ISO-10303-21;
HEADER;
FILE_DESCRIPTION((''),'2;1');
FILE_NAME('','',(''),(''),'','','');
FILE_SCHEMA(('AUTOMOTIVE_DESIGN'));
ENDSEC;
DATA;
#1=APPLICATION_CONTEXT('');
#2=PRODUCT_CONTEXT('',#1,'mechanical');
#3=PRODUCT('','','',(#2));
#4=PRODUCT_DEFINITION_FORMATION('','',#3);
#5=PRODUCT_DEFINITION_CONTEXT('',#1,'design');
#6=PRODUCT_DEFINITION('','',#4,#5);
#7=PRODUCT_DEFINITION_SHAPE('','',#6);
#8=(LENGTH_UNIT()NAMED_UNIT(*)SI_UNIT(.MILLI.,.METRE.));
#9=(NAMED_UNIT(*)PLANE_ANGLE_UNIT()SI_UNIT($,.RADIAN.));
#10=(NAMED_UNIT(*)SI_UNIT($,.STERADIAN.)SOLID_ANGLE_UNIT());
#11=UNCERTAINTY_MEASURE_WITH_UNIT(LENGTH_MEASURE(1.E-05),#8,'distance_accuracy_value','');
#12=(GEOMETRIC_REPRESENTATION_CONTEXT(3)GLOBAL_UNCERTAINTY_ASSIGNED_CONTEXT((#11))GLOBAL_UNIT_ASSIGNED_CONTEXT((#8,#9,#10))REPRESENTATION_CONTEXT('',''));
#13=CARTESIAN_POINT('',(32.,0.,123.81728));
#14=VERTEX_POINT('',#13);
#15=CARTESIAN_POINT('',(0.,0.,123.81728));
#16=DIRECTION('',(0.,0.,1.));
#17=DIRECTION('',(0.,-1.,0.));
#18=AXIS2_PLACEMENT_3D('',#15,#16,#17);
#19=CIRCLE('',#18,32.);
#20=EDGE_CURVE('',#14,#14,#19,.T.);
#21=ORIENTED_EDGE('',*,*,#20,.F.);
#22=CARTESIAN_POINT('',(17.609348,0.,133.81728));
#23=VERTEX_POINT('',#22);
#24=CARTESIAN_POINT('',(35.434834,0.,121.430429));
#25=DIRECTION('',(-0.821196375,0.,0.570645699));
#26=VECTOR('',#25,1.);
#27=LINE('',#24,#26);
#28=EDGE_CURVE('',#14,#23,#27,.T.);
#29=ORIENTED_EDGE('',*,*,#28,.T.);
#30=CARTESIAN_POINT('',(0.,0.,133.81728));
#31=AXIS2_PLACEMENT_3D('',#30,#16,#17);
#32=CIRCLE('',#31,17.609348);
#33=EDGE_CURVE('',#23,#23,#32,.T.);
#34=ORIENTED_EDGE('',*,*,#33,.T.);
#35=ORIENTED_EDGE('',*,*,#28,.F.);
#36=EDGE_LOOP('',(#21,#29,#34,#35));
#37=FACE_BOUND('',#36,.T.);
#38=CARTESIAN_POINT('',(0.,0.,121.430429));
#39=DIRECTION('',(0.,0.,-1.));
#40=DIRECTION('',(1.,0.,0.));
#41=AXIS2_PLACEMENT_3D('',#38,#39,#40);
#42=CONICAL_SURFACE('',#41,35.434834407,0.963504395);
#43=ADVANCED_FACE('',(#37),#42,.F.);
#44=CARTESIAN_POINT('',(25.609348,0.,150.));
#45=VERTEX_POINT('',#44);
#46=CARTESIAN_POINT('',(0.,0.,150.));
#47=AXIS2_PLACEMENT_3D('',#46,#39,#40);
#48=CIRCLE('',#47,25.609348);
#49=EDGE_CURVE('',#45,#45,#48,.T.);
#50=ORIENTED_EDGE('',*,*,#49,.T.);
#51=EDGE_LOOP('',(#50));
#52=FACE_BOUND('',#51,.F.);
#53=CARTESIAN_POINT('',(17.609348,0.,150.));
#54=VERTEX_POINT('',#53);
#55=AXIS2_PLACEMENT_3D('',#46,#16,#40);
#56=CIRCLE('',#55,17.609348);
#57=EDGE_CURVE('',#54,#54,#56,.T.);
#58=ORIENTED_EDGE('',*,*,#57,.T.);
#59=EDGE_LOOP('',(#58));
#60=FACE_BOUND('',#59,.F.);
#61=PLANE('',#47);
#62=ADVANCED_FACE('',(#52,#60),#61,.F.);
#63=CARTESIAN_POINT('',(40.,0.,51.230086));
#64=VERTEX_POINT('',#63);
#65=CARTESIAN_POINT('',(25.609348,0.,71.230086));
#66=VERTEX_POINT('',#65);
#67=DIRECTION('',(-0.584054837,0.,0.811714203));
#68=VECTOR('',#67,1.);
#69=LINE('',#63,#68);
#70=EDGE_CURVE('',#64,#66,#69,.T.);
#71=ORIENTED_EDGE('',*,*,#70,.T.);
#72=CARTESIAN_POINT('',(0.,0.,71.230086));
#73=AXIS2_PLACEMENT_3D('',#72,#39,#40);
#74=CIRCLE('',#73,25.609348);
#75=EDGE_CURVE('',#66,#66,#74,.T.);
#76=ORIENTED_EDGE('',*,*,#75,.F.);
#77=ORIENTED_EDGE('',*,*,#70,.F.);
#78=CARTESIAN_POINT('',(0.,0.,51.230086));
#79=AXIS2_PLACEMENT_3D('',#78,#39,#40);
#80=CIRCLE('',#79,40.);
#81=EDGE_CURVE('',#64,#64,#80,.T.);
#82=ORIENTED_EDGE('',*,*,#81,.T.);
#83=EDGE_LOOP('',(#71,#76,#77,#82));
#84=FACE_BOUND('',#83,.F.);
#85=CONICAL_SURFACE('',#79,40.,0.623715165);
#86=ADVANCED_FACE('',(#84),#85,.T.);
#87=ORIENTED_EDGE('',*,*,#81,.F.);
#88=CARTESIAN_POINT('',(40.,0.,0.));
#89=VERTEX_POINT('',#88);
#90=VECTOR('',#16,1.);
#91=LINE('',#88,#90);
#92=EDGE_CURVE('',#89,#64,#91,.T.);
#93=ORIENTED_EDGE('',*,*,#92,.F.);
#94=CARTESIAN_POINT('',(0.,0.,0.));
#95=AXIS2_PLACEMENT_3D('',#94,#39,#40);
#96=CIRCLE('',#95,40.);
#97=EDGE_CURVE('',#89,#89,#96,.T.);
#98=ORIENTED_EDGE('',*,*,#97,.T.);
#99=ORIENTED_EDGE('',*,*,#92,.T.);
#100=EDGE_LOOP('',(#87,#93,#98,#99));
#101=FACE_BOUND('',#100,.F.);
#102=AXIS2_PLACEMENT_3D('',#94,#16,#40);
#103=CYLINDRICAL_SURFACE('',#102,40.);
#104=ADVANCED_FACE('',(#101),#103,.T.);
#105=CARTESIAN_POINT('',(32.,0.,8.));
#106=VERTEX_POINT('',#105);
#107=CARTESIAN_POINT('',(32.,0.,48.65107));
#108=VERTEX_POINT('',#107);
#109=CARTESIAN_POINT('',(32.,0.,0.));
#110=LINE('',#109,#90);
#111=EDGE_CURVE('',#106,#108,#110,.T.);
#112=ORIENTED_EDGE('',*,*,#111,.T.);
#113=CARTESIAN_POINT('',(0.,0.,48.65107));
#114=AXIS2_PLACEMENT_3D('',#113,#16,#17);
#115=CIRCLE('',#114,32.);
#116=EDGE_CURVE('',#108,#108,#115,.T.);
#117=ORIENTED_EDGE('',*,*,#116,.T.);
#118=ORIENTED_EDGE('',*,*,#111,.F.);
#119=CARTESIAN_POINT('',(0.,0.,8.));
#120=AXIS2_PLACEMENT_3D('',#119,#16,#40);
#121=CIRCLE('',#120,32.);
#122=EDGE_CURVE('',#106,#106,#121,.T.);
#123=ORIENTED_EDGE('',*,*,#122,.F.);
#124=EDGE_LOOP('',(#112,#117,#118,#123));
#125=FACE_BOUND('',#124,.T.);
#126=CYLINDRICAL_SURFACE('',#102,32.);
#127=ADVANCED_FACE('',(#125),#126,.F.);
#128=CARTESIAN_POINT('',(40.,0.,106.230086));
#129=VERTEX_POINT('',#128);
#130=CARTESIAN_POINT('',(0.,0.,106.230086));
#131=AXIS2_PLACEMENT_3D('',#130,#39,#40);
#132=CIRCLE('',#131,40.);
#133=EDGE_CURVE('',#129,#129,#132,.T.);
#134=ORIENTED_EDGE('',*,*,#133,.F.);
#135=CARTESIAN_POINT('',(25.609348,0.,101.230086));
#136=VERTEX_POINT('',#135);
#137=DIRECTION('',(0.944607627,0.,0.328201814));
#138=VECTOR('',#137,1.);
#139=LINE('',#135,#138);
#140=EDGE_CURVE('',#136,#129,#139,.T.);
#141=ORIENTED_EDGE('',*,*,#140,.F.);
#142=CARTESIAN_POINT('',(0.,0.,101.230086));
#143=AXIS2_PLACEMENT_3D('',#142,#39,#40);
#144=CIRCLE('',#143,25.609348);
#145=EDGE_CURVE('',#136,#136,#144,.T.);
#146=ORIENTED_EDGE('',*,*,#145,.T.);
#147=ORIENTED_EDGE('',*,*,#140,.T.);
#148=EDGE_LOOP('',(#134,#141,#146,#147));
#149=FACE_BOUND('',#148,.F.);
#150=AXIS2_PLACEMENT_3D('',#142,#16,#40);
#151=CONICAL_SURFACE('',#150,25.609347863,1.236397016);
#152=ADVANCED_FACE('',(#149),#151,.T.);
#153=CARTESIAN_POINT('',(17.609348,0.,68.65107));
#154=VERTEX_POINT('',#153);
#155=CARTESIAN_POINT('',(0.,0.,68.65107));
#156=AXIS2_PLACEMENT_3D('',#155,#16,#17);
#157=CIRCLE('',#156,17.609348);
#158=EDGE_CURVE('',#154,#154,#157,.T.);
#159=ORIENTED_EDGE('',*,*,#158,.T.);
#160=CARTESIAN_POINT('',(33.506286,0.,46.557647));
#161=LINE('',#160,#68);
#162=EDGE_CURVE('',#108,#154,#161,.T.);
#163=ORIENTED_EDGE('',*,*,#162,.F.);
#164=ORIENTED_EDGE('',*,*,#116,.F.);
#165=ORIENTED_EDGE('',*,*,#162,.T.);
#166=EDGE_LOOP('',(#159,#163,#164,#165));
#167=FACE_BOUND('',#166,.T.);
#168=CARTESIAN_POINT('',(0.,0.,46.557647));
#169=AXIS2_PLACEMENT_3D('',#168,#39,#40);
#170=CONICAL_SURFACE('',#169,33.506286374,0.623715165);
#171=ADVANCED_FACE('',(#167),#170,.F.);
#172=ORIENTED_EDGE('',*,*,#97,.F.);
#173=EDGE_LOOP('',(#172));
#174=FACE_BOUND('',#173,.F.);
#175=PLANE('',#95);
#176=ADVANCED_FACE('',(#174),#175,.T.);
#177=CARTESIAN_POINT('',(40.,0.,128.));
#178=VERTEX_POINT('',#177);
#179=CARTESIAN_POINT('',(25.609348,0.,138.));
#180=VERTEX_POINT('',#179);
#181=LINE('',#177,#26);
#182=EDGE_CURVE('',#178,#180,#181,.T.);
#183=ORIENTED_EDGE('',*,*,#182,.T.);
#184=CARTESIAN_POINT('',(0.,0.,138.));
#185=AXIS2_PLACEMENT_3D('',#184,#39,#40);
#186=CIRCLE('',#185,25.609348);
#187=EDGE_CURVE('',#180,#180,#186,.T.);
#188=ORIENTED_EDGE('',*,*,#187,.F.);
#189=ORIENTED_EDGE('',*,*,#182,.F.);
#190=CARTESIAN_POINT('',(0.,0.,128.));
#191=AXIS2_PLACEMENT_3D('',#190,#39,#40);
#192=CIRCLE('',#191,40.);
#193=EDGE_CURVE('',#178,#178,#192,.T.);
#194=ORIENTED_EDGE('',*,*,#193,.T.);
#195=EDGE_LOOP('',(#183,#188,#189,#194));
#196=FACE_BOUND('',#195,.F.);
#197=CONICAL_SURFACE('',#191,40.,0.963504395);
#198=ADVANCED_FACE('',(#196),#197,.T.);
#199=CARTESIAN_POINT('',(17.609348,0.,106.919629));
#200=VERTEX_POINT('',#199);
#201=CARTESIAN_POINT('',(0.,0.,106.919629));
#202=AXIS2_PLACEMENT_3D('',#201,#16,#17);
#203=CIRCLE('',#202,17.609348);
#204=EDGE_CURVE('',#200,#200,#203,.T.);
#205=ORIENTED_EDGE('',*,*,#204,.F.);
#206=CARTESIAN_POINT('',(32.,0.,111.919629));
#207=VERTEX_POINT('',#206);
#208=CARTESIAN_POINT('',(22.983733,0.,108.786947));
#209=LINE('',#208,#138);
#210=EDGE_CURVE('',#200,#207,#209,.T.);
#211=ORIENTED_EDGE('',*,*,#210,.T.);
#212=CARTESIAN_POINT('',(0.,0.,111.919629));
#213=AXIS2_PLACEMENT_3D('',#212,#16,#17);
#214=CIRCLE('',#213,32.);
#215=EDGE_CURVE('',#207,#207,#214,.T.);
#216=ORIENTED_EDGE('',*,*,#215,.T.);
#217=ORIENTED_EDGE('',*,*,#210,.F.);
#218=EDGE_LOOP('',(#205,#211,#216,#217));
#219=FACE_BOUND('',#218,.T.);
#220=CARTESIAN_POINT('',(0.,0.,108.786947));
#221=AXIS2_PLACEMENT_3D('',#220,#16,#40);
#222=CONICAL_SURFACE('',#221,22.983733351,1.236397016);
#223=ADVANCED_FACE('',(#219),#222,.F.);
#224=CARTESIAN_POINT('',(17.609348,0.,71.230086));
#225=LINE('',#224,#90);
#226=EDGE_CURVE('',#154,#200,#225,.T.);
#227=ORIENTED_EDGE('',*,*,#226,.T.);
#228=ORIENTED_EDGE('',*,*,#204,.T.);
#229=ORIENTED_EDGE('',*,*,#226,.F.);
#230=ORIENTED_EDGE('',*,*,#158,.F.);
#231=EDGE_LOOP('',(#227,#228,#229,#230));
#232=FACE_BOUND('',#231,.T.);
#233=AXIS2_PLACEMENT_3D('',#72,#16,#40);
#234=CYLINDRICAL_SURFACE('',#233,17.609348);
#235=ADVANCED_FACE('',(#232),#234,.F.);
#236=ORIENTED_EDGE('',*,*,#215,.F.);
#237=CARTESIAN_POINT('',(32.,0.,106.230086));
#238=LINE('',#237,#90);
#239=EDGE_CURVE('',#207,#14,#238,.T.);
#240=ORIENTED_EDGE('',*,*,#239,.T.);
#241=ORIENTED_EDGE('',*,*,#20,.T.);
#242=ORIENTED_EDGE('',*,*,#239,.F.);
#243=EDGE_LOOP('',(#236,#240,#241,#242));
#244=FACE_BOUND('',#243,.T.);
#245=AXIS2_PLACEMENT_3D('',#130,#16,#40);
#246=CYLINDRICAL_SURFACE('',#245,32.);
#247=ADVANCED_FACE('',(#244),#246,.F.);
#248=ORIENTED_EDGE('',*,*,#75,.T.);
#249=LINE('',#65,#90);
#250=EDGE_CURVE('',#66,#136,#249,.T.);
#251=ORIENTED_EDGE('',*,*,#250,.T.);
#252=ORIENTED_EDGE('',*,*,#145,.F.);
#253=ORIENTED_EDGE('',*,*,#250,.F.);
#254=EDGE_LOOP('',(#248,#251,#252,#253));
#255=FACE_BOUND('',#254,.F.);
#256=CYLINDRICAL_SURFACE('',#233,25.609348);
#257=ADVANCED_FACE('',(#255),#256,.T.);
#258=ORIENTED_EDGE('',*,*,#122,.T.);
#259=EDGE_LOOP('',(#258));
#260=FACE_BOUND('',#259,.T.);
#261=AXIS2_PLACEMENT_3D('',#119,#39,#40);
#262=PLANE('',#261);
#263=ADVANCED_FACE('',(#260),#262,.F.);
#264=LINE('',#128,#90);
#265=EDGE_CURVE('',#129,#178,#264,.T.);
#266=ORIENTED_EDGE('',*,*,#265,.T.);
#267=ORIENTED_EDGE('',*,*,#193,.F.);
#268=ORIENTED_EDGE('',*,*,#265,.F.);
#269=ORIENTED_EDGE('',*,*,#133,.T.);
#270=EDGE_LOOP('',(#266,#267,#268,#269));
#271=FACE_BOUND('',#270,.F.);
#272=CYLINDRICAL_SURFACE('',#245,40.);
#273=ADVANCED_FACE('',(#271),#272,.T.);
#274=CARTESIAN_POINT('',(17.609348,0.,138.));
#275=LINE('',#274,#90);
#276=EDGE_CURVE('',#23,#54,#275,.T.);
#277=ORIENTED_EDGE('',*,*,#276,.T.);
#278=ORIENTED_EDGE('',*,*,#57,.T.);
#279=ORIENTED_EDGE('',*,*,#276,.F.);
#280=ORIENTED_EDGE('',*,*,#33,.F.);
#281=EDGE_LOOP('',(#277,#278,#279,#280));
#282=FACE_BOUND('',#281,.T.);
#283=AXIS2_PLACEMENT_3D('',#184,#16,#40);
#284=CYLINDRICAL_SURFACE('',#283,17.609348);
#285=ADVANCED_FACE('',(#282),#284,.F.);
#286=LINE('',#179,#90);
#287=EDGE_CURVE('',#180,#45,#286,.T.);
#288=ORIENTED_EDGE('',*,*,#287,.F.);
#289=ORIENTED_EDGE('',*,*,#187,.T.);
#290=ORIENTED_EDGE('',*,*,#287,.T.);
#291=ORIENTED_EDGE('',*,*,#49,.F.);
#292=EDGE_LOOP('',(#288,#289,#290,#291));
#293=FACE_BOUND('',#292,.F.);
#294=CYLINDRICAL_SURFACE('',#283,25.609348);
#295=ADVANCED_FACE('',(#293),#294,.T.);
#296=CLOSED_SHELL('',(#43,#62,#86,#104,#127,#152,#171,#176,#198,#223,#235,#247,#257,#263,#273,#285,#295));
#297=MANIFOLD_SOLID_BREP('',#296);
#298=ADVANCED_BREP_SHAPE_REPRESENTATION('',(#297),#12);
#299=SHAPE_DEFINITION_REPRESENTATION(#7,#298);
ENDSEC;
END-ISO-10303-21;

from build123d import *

# Parameters (mm, degrees)
F2_T = -8


with BuildPart() as f1:
    # F0 (on Front) → F1 (revolve)
    with BuildSketch(Plane.XZ):
        Polygon((0, 150), (0, 0), (40, 0), (40, 51.2300857674), (25.6093478629, 71.2300857674), (25.6093478629, 101.2300857674), (40, 106.2300857674), (40, 128), (25.6093478629, 138), (25.6093478629, 150), align=None)
    revolve(axis=Axis((0, 0, 75), (0, 0, -1)))

    # F2
    f2_openings = [f1.faces().sort_by_distance(p)[0] for p in [
        (0, 0, 150),
    ]]
    offset(amount=F2_T, openings=f2_openings, kind=Kind.INTERSECTION)


solid = f1.part
